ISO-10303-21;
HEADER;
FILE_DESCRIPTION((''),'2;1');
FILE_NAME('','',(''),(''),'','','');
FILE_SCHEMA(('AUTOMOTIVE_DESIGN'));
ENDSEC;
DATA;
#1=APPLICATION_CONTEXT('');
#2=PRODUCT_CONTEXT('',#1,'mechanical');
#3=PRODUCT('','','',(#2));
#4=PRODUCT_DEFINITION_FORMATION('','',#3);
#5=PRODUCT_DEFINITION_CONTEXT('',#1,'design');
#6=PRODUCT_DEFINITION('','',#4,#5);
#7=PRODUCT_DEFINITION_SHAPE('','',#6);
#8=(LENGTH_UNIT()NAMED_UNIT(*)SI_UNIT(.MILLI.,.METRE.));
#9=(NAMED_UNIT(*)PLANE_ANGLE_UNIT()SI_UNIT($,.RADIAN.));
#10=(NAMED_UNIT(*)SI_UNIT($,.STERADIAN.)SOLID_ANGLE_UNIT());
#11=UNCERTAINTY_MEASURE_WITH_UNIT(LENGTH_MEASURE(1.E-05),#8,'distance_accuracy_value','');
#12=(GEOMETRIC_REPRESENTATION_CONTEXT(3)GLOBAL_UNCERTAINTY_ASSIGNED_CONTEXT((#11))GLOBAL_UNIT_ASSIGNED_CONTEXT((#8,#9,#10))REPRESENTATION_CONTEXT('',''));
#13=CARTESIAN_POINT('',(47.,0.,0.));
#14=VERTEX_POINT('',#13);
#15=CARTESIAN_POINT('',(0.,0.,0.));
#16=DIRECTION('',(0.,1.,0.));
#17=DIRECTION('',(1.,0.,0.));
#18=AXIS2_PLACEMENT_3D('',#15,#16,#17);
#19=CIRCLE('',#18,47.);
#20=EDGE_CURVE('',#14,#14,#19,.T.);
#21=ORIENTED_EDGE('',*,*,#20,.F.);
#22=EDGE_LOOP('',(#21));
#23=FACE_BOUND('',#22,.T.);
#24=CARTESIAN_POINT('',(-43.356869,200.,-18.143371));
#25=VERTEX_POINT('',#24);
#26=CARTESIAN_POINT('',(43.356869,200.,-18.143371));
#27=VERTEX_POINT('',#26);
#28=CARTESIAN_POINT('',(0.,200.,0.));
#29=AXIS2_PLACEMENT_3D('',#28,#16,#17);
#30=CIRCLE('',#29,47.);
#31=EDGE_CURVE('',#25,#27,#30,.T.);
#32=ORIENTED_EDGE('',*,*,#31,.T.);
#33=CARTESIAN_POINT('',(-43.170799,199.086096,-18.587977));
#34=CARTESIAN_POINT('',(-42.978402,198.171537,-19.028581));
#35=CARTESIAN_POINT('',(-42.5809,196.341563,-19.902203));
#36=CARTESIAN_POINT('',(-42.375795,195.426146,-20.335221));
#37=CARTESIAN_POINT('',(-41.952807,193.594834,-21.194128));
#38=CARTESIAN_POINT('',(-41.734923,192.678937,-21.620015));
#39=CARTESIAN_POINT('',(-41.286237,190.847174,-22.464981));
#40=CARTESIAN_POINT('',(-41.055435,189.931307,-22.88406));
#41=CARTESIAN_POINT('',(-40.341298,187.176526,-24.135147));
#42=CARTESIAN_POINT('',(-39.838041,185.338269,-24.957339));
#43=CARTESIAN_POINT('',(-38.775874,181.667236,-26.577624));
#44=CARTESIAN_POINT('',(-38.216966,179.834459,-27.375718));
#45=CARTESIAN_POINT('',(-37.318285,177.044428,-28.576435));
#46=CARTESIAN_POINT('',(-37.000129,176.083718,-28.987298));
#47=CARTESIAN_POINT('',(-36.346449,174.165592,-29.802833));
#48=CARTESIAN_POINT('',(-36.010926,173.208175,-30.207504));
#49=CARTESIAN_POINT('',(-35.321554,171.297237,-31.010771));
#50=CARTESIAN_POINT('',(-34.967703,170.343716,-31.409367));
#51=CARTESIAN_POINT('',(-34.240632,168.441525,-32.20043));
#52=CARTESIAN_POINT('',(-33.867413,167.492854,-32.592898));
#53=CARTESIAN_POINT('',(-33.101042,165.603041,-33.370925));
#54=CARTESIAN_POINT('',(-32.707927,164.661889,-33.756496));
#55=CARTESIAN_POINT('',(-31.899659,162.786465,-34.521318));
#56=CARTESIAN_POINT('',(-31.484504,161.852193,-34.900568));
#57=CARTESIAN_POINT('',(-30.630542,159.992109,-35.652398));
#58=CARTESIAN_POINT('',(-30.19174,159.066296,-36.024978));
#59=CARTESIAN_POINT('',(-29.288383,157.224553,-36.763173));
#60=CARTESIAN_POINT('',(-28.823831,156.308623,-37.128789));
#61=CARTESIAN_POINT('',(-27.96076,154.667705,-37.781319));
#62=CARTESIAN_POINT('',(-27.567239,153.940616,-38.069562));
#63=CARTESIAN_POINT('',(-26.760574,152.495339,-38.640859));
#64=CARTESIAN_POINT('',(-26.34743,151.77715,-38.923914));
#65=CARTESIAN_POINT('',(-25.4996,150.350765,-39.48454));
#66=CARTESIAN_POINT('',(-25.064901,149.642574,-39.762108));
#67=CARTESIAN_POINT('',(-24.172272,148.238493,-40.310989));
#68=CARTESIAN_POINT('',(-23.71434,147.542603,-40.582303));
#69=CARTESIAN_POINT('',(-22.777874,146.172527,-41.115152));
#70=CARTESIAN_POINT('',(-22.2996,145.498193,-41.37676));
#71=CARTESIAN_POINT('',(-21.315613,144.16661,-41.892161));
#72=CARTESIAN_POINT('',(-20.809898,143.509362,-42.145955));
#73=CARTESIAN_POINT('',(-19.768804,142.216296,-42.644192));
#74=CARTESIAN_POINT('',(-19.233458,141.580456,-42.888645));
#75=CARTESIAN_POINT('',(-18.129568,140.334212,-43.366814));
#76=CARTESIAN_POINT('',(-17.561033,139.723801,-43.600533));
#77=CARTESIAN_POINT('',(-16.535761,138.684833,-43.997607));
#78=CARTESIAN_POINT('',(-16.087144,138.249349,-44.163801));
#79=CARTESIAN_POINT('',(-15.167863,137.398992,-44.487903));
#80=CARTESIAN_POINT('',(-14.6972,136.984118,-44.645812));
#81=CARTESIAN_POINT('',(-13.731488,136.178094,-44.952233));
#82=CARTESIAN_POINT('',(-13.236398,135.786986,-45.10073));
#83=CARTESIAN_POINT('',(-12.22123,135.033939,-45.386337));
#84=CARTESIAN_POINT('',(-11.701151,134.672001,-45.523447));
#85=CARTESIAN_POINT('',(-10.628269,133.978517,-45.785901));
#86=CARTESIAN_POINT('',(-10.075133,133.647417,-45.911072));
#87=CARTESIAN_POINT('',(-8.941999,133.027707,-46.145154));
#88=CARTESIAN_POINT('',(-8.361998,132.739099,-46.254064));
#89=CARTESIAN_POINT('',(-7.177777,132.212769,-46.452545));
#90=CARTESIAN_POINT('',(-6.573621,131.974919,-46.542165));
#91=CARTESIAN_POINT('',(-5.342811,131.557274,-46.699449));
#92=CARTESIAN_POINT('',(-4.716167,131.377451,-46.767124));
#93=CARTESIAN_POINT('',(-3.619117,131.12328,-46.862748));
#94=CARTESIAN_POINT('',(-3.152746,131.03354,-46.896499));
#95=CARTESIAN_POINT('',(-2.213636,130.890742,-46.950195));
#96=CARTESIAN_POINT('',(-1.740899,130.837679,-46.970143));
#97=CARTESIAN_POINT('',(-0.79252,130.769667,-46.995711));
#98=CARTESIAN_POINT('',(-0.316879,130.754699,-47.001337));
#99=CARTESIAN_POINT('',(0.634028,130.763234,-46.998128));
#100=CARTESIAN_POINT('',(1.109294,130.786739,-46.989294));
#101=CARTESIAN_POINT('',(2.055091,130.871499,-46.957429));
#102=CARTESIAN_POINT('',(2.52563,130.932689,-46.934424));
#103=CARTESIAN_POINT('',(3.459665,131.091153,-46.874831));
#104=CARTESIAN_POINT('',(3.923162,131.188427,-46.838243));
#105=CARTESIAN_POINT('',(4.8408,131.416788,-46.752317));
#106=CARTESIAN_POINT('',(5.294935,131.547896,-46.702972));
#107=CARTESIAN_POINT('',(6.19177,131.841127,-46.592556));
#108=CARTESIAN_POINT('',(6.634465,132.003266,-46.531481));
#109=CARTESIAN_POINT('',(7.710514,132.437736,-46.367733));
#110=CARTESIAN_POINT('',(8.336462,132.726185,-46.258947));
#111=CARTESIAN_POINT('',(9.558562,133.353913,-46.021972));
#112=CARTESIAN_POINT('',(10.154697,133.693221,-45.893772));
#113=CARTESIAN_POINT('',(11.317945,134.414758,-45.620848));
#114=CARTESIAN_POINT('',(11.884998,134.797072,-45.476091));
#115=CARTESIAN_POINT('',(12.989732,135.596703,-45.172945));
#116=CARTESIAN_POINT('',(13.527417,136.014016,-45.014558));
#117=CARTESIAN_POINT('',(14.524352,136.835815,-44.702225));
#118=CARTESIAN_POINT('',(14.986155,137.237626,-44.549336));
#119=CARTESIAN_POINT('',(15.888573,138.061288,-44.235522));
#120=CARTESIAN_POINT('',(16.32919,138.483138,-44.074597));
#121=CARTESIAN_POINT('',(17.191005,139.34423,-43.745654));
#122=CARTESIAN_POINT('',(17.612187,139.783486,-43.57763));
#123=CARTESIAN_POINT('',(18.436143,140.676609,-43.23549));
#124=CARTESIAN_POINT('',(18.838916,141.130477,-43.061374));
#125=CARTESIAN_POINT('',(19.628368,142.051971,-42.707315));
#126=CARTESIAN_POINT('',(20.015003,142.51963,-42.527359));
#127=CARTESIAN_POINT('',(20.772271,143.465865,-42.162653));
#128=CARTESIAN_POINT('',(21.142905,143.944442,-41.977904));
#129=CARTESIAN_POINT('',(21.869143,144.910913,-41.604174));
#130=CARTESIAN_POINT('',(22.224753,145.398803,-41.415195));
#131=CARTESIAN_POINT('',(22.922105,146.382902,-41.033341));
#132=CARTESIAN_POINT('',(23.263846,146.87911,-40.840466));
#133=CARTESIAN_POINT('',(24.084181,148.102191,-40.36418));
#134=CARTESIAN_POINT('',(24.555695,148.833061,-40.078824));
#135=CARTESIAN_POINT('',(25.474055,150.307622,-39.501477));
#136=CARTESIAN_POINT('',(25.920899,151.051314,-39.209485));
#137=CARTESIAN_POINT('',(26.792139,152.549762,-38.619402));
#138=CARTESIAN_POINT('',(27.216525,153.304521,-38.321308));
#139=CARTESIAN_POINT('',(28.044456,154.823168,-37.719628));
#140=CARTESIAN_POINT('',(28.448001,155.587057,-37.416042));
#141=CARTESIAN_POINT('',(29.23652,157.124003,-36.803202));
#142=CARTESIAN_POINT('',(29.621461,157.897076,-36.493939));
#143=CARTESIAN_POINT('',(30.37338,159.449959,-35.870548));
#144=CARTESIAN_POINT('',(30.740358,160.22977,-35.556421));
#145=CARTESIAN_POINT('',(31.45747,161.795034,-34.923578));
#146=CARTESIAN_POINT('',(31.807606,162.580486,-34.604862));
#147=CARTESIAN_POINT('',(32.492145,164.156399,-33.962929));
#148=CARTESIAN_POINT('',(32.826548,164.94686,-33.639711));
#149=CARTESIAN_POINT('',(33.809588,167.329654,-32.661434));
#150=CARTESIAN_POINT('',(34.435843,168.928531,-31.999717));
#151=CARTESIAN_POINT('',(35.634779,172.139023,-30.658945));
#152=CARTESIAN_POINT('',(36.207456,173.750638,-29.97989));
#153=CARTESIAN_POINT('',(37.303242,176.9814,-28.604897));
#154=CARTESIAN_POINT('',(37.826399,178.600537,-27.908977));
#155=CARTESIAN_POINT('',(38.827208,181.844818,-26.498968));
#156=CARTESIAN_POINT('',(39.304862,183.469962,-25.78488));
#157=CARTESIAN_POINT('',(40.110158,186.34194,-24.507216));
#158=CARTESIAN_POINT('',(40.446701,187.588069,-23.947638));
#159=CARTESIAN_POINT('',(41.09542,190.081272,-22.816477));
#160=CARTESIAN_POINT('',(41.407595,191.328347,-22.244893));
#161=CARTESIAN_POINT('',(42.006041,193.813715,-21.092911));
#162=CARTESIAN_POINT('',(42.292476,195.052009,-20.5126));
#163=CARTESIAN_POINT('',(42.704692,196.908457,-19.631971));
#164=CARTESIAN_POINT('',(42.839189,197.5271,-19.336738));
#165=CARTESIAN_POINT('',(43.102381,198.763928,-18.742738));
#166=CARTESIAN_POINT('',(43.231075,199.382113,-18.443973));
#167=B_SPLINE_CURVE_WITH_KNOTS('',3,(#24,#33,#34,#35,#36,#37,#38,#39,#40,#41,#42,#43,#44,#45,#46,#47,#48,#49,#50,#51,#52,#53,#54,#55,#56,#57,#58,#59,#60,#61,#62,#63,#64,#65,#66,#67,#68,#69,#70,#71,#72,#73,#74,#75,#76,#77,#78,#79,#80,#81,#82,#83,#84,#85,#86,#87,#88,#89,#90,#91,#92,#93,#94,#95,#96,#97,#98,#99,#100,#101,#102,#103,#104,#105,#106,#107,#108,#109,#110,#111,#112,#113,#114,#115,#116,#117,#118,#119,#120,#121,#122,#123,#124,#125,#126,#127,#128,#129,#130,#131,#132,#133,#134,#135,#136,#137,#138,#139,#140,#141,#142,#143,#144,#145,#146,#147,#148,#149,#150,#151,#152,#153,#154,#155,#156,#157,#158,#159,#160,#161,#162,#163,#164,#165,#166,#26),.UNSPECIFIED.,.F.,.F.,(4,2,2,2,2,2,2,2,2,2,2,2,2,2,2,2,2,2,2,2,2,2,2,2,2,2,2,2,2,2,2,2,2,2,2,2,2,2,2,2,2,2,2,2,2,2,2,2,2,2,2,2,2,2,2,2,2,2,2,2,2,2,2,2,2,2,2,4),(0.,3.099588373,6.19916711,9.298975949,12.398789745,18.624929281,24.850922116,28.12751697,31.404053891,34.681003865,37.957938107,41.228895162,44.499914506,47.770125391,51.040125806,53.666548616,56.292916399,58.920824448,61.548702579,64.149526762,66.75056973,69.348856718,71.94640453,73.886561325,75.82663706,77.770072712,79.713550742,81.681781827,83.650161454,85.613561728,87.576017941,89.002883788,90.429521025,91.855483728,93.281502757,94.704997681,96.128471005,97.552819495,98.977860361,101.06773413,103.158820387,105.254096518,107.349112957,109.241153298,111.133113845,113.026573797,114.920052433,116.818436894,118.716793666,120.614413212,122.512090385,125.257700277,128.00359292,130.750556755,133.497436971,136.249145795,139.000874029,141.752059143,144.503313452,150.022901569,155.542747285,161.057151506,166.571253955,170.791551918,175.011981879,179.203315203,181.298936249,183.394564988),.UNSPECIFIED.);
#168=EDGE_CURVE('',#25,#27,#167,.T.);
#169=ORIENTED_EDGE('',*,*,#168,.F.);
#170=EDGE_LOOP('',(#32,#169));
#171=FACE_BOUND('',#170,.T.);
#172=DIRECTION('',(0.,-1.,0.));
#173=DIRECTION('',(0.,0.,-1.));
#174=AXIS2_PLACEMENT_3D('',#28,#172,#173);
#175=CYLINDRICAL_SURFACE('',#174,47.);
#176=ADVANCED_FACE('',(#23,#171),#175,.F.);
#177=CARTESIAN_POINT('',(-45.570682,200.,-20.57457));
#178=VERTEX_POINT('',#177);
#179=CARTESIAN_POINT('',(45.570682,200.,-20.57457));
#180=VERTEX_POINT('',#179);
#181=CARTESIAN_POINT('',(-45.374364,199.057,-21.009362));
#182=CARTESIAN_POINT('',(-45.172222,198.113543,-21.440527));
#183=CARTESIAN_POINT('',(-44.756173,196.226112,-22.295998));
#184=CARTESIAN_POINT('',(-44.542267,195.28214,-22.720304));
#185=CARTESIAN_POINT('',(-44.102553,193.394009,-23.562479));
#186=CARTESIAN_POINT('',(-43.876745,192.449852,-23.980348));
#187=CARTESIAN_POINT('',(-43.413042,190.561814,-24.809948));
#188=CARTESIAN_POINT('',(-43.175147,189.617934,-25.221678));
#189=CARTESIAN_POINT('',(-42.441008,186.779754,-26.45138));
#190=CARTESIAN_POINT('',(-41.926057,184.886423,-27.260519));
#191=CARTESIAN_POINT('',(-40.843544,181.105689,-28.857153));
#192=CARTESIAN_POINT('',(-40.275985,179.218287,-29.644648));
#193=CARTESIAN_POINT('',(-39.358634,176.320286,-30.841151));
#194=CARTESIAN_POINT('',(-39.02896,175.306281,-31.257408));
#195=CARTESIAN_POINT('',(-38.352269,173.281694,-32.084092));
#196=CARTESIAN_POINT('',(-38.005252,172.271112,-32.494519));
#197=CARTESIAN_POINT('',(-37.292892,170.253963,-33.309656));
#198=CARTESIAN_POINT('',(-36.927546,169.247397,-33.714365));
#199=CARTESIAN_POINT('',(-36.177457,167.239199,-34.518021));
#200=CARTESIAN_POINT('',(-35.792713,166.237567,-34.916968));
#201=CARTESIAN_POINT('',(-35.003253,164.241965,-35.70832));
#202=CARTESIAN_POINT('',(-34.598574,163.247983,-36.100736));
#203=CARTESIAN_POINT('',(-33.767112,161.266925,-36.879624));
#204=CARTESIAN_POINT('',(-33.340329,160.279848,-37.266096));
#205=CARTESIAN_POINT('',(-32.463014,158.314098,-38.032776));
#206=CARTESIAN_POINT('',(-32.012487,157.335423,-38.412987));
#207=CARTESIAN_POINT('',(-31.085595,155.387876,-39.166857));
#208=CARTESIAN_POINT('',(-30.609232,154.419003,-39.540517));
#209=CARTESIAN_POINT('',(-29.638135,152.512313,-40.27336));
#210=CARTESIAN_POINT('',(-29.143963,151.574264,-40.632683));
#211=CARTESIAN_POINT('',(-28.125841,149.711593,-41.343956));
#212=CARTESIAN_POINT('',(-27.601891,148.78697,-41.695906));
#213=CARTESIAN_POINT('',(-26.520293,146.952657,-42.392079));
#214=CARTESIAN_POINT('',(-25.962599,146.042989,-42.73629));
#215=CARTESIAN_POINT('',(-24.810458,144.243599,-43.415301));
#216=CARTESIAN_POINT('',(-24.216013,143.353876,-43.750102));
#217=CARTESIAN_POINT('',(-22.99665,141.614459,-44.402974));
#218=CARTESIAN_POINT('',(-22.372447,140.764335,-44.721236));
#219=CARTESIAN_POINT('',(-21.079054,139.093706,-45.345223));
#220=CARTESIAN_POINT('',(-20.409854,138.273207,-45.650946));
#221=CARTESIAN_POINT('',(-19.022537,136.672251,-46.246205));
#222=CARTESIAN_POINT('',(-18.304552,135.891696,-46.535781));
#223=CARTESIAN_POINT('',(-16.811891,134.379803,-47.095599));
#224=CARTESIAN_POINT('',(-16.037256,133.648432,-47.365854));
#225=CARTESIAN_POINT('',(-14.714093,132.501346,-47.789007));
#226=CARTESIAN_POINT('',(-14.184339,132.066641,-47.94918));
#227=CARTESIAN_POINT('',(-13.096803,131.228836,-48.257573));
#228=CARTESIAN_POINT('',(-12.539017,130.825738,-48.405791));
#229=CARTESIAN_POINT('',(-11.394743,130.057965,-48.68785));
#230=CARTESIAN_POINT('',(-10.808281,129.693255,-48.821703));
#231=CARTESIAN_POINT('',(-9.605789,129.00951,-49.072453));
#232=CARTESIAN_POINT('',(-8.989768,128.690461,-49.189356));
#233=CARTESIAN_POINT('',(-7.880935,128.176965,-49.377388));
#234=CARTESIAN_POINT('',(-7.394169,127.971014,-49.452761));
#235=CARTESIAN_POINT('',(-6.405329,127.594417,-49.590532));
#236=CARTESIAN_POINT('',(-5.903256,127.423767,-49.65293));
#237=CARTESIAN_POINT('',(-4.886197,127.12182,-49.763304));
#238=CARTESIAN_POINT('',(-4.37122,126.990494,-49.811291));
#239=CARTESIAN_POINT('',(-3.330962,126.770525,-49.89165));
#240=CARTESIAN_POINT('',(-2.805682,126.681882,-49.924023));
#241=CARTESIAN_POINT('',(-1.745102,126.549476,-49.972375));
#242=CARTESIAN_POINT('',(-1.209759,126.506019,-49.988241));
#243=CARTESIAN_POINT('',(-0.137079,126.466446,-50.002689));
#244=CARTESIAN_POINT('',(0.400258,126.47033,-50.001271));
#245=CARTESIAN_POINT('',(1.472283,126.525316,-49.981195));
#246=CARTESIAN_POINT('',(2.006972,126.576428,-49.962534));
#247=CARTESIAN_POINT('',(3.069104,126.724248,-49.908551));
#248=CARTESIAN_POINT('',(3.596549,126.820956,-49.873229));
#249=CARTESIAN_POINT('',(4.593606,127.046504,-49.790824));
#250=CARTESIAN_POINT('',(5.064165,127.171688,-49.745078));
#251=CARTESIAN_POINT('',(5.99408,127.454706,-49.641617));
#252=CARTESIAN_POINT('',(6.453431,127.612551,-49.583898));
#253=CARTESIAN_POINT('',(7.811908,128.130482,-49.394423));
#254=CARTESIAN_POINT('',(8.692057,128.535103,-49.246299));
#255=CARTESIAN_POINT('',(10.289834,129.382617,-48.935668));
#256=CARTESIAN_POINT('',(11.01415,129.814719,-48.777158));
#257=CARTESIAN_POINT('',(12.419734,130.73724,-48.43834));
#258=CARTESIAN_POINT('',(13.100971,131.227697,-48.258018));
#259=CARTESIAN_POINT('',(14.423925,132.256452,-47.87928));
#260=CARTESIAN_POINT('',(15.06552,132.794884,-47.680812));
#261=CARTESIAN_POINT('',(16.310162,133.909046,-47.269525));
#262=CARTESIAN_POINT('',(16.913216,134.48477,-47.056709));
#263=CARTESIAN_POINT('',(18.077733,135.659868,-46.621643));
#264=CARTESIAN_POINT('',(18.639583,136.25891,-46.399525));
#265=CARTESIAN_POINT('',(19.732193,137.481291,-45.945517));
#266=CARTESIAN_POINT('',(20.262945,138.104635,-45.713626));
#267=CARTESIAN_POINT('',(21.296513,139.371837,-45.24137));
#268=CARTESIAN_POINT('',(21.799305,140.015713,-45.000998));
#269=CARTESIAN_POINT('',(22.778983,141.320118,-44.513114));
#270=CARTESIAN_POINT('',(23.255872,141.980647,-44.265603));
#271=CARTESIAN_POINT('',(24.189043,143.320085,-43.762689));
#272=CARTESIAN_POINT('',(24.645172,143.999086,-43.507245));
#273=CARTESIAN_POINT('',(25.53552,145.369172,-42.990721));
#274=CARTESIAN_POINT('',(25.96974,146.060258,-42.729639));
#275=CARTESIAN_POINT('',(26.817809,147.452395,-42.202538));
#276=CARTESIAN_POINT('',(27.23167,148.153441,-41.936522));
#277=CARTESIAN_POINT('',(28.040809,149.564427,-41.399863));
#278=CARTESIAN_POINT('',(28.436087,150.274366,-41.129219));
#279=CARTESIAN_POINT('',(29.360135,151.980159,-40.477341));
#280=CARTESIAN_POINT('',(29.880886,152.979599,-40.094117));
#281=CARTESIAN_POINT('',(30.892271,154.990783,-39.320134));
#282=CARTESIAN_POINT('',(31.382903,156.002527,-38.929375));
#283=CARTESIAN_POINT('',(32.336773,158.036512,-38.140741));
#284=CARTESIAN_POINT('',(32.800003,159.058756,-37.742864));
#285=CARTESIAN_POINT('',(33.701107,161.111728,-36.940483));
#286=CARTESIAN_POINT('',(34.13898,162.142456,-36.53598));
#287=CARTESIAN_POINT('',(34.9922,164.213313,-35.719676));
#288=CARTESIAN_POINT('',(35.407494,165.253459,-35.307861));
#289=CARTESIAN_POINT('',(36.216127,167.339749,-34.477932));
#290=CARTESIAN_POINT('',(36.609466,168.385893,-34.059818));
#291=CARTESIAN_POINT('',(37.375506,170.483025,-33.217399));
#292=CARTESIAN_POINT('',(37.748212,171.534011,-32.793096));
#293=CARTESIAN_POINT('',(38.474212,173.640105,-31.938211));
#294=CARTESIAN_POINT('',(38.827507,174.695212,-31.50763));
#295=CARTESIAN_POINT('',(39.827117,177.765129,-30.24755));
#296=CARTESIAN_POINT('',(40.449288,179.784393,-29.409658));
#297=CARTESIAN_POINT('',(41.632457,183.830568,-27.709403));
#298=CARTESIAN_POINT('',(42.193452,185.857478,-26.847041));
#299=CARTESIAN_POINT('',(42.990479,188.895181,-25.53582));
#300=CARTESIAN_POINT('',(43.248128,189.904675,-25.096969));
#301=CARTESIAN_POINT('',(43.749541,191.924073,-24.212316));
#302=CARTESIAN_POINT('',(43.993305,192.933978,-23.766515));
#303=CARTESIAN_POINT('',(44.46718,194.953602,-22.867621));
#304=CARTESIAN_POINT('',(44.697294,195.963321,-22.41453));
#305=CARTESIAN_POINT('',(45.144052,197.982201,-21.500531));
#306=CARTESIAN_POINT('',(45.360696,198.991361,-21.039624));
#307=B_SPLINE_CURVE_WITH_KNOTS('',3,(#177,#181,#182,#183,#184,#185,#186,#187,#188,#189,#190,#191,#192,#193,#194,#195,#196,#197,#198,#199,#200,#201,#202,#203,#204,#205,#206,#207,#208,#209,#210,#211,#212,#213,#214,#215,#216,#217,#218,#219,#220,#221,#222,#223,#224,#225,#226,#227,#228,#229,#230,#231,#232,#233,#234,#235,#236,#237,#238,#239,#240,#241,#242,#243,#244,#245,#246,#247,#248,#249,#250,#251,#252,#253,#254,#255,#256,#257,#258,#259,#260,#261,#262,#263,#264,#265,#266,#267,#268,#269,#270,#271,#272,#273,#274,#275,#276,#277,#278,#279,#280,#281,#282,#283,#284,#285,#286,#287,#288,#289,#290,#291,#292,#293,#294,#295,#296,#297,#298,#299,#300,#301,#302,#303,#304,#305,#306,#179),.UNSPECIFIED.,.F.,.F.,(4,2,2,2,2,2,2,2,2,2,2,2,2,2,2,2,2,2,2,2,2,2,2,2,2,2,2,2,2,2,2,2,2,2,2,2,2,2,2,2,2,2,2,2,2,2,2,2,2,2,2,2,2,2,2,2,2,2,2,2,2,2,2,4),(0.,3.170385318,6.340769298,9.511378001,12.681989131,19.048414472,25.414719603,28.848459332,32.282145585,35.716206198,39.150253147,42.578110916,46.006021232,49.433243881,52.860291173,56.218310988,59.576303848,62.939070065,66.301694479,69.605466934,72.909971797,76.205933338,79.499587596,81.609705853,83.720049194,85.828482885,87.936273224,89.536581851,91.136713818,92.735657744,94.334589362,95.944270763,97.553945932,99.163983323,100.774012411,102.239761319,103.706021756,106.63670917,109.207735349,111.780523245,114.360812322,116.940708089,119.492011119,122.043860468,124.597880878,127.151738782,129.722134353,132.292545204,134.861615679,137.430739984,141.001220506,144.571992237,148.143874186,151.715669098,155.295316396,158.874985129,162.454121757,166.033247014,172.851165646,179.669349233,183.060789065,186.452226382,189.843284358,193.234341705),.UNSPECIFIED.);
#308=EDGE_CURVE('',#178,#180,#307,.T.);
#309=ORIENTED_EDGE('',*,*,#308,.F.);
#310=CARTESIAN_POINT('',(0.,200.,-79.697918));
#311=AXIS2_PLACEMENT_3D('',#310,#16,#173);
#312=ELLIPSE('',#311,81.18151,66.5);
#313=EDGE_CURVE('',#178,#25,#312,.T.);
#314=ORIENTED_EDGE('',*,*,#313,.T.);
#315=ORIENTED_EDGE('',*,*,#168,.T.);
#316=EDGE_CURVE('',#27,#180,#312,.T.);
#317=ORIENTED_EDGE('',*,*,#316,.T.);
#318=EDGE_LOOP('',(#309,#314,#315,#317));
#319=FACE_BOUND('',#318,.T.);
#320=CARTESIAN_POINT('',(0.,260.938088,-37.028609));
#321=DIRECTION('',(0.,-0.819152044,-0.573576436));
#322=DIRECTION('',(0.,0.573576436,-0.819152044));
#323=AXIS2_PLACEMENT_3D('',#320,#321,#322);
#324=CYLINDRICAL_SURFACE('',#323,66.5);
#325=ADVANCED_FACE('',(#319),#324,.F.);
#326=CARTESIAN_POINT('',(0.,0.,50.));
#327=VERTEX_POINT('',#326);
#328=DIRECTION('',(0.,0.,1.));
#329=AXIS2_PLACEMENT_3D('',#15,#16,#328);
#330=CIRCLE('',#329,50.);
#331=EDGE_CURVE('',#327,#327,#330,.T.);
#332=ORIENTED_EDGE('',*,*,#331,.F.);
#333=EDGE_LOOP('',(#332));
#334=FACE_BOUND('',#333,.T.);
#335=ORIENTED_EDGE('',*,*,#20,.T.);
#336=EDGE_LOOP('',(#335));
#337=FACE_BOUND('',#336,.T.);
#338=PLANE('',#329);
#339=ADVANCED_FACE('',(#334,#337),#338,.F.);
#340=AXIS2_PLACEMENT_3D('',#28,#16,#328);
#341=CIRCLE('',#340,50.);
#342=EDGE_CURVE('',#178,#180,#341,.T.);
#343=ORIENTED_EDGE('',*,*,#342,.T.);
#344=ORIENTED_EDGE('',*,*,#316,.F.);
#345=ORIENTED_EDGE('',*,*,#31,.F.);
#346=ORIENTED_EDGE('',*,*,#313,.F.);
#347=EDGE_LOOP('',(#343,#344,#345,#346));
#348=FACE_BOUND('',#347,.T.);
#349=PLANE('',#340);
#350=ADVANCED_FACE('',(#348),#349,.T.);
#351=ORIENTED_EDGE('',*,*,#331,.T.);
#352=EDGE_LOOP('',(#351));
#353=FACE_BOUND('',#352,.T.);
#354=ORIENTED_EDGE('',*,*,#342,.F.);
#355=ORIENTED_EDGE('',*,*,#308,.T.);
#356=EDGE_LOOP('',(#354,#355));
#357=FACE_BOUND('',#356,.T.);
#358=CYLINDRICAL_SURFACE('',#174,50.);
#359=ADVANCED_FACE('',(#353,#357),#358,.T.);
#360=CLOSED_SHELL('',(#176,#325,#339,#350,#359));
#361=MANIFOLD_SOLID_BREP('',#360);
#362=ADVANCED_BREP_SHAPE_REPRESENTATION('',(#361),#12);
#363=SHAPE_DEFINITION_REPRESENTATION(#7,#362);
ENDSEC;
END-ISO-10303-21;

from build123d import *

# Parameters (mm, degrees)
EXTRUDE_1_OUTLINE_R      = 50
EXTRUDE_1_OUTLINE_R_2    = 47
EXTRUDE_1_DEPTH          = 200
CUT_EXTRUDE_1_DEPTH      = 213.132034356
CUT_EXTRUDE_1_DEPTH_BACK = 213.132034356
SKETCH_2_R               = 66.5


# Read off the part's stored shape, not the designer's step: Вытянуть-Тонкостенный1
with BuildPart() as part:
    # Вытянуть-Тонкостенный1 outline → Вытянуть-Тонкостенный1 (new body)
    with BuildSketch(Plane(origin=(0, 0, 0), x_dir=(1, 0, 0), z_dir=(0, 1, 0))):
        Circle(EXTRUDE_1_OUTLINE_R)
        Circle(EXTRUDE_1_OUTLINE_R_2, mode=Mode.SUBTRACT)
    extrude(amount=EXTRUDE_1_DEPTH)

    # Эскиз2 → Вырез-Вытянуть1 (cut, two sides: drawn at the far end of the back side and taken through both)
    with BuildSketch(Plane(origin=(0, 0, 0), x_dir=(1, 0, 0), z_dir=(0, -0.819152044288991, -0.5735764363510473)).offset(-CUT_EXTRUDE_1_DEPTH_BACK)):
        with Locations((0, -180)):
            Circle(SKETCH_2_R)
    extrude(amount=CUT_EXTRUDE_1_DEPTH + CUT_EXTRUDE_1_DEPTH_BACK, mode=Mode.SUBTRACT)


solid = part.part
